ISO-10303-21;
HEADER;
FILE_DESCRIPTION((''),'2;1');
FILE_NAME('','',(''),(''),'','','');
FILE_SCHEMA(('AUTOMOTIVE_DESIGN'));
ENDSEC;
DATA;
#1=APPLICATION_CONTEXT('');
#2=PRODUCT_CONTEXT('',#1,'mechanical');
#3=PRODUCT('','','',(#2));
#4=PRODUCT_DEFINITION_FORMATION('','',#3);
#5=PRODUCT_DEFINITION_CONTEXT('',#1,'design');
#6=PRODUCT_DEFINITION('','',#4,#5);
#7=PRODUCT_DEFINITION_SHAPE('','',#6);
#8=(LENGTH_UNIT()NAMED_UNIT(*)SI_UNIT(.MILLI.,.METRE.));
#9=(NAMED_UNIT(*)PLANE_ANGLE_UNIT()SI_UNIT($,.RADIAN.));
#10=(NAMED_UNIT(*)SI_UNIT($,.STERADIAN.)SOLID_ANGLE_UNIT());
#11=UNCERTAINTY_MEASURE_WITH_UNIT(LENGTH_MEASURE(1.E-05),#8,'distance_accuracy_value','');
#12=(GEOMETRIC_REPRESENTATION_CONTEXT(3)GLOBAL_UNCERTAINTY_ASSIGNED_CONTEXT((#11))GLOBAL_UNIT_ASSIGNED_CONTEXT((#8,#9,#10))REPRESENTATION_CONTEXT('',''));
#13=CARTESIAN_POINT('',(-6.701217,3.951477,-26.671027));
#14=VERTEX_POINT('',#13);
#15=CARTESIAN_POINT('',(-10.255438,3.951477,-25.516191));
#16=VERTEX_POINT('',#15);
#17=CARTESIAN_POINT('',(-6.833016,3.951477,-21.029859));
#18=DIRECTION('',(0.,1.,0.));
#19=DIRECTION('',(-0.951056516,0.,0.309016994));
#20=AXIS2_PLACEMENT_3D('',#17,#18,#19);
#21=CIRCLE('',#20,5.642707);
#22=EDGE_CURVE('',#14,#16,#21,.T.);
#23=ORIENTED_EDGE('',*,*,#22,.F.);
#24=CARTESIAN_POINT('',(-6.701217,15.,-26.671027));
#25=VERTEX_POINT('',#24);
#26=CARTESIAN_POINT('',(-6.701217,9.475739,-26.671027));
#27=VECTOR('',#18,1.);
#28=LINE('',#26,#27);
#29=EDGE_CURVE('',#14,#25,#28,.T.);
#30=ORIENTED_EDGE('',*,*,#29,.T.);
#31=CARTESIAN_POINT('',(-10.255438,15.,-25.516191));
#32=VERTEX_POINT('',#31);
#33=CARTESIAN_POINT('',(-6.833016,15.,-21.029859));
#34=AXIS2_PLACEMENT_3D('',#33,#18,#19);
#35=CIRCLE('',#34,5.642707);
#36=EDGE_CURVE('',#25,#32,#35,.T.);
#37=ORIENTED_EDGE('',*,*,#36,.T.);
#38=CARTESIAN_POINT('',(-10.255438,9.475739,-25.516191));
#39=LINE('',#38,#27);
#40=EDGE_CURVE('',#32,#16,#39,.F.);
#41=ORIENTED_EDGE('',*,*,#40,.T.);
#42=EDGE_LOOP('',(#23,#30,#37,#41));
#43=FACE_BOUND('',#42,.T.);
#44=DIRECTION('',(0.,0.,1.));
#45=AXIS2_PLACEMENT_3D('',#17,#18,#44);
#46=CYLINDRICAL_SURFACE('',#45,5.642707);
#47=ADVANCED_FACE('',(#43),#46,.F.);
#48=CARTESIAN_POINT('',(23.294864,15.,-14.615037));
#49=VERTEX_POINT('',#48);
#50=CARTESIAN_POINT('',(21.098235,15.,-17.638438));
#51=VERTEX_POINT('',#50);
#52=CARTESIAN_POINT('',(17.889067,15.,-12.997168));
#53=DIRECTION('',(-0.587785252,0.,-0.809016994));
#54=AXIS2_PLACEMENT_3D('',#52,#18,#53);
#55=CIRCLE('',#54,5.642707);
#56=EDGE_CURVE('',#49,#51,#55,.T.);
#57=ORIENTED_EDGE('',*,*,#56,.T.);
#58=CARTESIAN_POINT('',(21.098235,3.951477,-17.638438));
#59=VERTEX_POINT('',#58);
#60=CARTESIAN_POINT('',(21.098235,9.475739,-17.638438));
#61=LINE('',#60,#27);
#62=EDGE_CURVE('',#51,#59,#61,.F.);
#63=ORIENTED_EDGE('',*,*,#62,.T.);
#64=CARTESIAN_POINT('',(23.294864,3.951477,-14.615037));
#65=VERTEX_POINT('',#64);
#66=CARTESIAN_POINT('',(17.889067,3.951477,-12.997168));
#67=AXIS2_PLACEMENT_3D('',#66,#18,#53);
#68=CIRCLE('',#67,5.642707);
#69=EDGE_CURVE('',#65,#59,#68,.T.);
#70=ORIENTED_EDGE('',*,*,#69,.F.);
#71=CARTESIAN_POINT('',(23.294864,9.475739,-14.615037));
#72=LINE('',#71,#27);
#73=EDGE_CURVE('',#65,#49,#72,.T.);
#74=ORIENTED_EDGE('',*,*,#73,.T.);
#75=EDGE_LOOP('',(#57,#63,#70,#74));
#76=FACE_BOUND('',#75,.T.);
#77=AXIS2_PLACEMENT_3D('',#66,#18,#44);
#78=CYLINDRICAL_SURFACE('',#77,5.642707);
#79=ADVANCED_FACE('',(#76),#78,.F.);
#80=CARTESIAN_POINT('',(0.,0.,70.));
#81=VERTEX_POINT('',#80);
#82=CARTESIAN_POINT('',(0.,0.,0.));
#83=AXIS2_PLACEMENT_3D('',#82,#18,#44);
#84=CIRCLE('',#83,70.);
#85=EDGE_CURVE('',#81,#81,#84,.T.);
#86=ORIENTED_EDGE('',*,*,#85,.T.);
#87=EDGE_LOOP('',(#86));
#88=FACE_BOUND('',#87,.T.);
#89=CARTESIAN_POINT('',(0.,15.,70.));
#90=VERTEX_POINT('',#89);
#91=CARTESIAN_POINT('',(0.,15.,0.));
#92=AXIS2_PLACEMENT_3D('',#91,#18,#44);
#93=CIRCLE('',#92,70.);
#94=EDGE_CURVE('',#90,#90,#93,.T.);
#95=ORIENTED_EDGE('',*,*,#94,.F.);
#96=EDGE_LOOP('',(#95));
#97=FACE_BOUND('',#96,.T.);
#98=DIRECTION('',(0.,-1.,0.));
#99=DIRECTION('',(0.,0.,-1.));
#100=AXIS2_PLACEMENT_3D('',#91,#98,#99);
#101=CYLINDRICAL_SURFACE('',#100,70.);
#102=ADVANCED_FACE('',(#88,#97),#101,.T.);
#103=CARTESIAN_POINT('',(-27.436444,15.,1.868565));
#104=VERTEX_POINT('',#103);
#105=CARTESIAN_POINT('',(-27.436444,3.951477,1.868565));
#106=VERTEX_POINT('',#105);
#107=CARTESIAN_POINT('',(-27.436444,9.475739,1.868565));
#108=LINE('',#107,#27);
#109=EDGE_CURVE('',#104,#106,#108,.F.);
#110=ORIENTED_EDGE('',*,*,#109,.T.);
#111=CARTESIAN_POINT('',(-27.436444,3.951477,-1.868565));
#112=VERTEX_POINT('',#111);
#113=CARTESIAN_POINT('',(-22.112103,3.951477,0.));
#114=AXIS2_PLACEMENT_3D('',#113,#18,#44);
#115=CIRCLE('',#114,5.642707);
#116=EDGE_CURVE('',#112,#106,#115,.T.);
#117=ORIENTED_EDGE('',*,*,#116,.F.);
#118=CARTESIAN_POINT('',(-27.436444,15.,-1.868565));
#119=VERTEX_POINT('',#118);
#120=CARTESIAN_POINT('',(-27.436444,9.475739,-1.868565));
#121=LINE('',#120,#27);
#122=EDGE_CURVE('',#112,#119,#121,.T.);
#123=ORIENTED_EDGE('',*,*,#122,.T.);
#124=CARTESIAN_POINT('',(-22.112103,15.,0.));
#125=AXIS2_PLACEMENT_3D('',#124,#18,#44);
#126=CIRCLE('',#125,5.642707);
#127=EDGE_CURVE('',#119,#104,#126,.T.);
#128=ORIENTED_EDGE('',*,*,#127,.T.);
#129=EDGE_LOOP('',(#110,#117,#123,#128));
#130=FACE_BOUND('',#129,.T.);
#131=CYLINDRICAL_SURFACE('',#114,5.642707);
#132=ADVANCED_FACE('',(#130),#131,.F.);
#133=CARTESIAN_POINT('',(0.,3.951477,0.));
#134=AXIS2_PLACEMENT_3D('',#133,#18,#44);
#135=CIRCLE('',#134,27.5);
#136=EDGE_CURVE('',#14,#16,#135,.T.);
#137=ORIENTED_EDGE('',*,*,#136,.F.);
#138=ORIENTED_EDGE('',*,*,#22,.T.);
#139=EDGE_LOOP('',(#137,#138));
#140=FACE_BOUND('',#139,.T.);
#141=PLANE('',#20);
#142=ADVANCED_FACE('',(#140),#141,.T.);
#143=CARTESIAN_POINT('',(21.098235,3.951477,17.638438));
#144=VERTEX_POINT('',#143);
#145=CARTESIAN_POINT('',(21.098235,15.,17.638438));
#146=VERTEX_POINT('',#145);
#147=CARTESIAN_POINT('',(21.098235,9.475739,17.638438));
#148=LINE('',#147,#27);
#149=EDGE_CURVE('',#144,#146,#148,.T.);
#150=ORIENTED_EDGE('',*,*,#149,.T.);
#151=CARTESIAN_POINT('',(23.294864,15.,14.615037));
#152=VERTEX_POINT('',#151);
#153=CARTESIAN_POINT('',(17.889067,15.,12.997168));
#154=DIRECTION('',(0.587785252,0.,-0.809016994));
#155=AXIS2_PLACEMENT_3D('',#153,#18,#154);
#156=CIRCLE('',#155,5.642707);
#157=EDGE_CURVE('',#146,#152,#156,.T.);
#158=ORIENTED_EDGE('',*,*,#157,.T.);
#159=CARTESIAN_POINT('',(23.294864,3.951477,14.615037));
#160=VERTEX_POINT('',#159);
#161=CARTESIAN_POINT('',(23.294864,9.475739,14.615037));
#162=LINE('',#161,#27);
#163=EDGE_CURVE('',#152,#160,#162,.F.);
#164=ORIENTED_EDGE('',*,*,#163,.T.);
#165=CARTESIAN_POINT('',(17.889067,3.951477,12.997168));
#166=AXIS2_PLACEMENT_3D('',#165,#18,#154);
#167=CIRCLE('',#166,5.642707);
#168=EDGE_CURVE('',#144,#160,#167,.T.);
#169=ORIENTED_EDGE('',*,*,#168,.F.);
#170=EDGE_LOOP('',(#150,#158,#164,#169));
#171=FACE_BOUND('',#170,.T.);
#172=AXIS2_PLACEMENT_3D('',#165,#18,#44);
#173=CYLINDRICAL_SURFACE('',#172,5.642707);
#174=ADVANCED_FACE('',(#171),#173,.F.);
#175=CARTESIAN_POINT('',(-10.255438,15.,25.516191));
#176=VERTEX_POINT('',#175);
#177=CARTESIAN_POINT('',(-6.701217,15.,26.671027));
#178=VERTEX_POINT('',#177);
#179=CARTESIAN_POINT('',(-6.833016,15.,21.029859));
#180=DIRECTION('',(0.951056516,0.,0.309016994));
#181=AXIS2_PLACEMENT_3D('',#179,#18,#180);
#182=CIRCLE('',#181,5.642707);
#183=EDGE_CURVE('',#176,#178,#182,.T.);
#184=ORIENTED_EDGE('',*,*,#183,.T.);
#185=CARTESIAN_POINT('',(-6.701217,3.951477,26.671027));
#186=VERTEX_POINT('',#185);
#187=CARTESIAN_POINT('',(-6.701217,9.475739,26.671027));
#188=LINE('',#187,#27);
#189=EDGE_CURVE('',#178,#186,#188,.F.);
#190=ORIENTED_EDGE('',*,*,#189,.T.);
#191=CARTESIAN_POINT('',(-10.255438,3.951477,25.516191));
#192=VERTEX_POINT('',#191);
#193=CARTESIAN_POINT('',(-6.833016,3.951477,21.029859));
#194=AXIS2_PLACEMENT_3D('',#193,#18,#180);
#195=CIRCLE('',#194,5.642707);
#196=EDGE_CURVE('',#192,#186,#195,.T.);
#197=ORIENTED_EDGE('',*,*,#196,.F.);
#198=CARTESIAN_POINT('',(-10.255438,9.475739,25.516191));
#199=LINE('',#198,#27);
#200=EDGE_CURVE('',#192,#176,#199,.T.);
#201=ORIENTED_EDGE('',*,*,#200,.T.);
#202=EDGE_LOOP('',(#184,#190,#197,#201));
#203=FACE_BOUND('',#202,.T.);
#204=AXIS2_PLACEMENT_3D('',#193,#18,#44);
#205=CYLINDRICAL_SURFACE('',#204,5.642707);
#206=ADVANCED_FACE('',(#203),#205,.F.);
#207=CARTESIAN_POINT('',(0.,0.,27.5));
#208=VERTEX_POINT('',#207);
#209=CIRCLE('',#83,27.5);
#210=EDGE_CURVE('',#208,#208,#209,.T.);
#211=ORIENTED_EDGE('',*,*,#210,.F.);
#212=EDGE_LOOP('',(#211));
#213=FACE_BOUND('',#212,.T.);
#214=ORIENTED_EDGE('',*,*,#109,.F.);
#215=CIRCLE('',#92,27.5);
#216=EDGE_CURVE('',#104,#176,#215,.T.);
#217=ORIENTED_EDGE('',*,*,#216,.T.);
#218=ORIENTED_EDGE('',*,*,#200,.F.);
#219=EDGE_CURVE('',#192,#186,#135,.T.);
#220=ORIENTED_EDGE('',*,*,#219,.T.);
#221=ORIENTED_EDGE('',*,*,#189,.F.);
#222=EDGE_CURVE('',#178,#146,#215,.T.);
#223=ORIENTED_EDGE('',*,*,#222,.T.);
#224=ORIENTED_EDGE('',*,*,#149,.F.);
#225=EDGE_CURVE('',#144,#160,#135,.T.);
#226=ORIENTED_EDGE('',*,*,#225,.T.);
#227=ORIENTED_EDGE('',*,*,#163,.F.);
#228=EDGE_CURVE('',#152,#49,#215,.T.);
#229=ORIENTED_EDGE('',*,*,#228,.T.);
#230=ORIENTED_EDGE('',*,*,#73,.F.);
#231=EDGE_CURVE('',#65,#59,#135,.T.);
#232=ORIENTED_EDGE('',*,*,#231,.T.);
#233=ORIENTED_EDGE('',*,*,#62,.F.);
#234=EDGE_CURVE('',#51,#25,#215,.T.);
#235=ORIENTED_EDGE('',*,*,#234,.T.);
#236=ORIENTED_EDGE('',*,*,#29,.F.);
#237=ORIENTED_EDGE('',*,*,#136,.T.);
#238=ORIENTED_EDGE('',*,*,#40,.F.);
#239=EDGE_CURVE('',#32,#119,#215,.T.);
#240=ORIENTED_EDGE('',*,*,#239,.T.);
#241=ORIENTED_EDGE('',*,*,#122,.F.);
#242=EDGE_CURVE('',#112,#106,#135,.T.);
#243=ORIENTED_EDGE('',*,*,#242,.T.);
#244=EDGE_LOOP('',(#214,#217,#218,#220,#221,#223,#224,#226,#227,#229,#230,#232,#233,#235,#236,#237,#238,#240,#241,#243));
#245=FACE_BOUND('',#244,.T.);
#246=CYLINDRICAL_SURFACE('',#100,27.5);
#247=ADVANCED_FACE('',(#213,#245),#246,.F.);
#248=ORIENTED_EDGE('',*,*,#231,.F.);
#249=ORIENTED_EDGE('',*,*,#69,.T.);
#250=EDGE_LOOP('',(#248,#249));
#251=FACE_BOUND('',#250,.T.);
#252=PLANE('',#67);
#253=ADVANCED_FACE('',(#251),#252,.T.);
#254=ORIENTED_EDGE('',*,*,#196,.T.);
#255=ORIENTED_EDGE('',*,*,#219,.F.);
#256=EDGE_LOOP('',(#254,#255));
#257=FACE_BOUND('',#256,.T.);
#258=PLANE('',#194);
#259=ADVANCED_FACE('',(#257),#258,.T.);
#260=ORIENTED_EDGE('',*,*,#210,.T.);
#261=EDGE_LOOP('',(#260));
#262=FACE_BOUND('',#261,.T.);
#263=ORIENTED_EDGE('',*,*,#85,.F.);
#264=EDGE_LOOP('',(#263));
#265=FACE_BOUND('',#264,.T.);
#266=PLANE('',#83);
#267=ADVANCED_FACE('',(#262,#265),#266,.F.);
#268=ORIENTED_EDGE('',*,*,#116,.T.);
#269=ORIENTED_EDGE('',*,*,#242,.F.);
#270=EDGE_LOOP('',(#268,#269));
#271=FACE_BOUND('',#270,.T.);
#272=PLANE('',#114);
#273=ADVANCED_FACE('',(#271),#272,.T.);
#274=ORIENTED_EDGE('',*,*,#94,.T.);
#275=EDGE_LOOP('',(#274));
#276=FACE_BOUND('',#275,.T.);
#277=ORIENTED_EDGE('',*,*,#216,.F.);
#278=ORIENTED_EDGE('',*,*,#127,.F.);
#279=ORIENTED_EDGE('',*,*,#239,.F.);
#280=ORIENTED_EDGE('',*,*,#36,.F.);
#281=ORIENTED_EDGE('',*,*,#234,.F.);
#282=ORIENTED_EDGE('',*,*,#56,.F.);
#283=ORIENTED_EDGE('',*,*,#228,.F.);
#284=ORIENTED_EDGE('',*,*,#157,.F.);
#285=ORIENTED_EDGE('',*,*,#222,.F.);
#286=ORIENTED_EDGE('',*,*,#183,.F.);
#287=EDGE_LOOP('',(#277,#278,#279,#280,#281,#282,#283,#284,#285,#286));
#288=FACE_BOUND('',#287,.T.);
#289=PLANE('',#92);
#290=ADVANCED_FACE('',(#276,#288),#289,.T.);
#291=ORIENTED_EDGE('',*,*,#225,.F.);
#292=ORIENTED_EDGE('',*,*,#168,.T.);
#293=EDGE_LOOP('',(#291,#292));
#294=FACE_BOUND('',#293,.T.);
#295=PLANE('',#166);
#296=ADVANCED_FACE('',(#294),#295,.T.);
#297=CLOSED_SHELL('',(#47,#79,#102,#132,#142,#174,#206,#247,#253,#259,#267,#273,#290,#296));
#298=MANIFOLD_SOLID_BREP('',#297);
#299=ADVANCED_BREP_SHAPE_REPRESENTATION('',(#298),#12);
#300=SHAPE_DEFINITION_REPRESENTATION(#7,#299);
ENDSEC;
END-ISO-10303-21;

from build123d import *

# Parameters (mm, degrees)
SKETCH1_R           = 70
BOSS_EXTRUDE1_DEPTH = 15
SKETCH2_R           = 27.5
CUT_EXTRUDE1_DEPTH  = 101.124921973
SKETCH3_R           = 5.642707135
CUT_EXTRUDE2_DEPTH  = 11.048522985
CIRPATTERN1_COUNT   = 5


with BuildPart() as part:
    # Sketch1 → Boss-Extrude1 (new body)
    with BuildSketch(Plane(origin=(0, 0, 0), x_dir=(1, 0, 0), z_dir=(0, 1, 0))):
        Circle(SKETCH1_R)
    extrude(amount=BOSS_EXTRUDE1_DEPTH)

    # Sketch2 → Cut-Extrude1 (cut, through all)
    with BuildSketch(Plane(origin=(0, 0, 0), x_dir=(1, 0, 0), z_dir=(0, 1, 0))):
        Circle(SKETCH2_R)
    extrude(amount=CUT_EXTRUDE1_DEPTH, mode=Mode.SUBTRACT)

    # Sketch3 → Cut-Extrude2 (cut)
    with BuildSketch(Plane(origin=(0, 15, 0), x_dir=(1, 0, 0), z_dir=(0, 1, 0))):
        with Locations((-22.112102832, 0)):
            Circle(SKETCH3_R)
    cut_extrude2 = extrude(amount=-CUT_EXTRUDE2_DEPTH, mode=Mode.SUBTRACT)

    # CirPattern1: Cut-Extrude2 ×5 about axis
    cirpattern1_axis = Axis((0, 0, 0), (0, 1, 0))
    for i in range(1, CIRPATTERN1_COUNT):
        add(cut_extrude2.rotate(cirpattern1_axis, i * 360 / CIRPATTERN1_COUNT), mode=Mode.SUBTRACT)


solid = part.part
